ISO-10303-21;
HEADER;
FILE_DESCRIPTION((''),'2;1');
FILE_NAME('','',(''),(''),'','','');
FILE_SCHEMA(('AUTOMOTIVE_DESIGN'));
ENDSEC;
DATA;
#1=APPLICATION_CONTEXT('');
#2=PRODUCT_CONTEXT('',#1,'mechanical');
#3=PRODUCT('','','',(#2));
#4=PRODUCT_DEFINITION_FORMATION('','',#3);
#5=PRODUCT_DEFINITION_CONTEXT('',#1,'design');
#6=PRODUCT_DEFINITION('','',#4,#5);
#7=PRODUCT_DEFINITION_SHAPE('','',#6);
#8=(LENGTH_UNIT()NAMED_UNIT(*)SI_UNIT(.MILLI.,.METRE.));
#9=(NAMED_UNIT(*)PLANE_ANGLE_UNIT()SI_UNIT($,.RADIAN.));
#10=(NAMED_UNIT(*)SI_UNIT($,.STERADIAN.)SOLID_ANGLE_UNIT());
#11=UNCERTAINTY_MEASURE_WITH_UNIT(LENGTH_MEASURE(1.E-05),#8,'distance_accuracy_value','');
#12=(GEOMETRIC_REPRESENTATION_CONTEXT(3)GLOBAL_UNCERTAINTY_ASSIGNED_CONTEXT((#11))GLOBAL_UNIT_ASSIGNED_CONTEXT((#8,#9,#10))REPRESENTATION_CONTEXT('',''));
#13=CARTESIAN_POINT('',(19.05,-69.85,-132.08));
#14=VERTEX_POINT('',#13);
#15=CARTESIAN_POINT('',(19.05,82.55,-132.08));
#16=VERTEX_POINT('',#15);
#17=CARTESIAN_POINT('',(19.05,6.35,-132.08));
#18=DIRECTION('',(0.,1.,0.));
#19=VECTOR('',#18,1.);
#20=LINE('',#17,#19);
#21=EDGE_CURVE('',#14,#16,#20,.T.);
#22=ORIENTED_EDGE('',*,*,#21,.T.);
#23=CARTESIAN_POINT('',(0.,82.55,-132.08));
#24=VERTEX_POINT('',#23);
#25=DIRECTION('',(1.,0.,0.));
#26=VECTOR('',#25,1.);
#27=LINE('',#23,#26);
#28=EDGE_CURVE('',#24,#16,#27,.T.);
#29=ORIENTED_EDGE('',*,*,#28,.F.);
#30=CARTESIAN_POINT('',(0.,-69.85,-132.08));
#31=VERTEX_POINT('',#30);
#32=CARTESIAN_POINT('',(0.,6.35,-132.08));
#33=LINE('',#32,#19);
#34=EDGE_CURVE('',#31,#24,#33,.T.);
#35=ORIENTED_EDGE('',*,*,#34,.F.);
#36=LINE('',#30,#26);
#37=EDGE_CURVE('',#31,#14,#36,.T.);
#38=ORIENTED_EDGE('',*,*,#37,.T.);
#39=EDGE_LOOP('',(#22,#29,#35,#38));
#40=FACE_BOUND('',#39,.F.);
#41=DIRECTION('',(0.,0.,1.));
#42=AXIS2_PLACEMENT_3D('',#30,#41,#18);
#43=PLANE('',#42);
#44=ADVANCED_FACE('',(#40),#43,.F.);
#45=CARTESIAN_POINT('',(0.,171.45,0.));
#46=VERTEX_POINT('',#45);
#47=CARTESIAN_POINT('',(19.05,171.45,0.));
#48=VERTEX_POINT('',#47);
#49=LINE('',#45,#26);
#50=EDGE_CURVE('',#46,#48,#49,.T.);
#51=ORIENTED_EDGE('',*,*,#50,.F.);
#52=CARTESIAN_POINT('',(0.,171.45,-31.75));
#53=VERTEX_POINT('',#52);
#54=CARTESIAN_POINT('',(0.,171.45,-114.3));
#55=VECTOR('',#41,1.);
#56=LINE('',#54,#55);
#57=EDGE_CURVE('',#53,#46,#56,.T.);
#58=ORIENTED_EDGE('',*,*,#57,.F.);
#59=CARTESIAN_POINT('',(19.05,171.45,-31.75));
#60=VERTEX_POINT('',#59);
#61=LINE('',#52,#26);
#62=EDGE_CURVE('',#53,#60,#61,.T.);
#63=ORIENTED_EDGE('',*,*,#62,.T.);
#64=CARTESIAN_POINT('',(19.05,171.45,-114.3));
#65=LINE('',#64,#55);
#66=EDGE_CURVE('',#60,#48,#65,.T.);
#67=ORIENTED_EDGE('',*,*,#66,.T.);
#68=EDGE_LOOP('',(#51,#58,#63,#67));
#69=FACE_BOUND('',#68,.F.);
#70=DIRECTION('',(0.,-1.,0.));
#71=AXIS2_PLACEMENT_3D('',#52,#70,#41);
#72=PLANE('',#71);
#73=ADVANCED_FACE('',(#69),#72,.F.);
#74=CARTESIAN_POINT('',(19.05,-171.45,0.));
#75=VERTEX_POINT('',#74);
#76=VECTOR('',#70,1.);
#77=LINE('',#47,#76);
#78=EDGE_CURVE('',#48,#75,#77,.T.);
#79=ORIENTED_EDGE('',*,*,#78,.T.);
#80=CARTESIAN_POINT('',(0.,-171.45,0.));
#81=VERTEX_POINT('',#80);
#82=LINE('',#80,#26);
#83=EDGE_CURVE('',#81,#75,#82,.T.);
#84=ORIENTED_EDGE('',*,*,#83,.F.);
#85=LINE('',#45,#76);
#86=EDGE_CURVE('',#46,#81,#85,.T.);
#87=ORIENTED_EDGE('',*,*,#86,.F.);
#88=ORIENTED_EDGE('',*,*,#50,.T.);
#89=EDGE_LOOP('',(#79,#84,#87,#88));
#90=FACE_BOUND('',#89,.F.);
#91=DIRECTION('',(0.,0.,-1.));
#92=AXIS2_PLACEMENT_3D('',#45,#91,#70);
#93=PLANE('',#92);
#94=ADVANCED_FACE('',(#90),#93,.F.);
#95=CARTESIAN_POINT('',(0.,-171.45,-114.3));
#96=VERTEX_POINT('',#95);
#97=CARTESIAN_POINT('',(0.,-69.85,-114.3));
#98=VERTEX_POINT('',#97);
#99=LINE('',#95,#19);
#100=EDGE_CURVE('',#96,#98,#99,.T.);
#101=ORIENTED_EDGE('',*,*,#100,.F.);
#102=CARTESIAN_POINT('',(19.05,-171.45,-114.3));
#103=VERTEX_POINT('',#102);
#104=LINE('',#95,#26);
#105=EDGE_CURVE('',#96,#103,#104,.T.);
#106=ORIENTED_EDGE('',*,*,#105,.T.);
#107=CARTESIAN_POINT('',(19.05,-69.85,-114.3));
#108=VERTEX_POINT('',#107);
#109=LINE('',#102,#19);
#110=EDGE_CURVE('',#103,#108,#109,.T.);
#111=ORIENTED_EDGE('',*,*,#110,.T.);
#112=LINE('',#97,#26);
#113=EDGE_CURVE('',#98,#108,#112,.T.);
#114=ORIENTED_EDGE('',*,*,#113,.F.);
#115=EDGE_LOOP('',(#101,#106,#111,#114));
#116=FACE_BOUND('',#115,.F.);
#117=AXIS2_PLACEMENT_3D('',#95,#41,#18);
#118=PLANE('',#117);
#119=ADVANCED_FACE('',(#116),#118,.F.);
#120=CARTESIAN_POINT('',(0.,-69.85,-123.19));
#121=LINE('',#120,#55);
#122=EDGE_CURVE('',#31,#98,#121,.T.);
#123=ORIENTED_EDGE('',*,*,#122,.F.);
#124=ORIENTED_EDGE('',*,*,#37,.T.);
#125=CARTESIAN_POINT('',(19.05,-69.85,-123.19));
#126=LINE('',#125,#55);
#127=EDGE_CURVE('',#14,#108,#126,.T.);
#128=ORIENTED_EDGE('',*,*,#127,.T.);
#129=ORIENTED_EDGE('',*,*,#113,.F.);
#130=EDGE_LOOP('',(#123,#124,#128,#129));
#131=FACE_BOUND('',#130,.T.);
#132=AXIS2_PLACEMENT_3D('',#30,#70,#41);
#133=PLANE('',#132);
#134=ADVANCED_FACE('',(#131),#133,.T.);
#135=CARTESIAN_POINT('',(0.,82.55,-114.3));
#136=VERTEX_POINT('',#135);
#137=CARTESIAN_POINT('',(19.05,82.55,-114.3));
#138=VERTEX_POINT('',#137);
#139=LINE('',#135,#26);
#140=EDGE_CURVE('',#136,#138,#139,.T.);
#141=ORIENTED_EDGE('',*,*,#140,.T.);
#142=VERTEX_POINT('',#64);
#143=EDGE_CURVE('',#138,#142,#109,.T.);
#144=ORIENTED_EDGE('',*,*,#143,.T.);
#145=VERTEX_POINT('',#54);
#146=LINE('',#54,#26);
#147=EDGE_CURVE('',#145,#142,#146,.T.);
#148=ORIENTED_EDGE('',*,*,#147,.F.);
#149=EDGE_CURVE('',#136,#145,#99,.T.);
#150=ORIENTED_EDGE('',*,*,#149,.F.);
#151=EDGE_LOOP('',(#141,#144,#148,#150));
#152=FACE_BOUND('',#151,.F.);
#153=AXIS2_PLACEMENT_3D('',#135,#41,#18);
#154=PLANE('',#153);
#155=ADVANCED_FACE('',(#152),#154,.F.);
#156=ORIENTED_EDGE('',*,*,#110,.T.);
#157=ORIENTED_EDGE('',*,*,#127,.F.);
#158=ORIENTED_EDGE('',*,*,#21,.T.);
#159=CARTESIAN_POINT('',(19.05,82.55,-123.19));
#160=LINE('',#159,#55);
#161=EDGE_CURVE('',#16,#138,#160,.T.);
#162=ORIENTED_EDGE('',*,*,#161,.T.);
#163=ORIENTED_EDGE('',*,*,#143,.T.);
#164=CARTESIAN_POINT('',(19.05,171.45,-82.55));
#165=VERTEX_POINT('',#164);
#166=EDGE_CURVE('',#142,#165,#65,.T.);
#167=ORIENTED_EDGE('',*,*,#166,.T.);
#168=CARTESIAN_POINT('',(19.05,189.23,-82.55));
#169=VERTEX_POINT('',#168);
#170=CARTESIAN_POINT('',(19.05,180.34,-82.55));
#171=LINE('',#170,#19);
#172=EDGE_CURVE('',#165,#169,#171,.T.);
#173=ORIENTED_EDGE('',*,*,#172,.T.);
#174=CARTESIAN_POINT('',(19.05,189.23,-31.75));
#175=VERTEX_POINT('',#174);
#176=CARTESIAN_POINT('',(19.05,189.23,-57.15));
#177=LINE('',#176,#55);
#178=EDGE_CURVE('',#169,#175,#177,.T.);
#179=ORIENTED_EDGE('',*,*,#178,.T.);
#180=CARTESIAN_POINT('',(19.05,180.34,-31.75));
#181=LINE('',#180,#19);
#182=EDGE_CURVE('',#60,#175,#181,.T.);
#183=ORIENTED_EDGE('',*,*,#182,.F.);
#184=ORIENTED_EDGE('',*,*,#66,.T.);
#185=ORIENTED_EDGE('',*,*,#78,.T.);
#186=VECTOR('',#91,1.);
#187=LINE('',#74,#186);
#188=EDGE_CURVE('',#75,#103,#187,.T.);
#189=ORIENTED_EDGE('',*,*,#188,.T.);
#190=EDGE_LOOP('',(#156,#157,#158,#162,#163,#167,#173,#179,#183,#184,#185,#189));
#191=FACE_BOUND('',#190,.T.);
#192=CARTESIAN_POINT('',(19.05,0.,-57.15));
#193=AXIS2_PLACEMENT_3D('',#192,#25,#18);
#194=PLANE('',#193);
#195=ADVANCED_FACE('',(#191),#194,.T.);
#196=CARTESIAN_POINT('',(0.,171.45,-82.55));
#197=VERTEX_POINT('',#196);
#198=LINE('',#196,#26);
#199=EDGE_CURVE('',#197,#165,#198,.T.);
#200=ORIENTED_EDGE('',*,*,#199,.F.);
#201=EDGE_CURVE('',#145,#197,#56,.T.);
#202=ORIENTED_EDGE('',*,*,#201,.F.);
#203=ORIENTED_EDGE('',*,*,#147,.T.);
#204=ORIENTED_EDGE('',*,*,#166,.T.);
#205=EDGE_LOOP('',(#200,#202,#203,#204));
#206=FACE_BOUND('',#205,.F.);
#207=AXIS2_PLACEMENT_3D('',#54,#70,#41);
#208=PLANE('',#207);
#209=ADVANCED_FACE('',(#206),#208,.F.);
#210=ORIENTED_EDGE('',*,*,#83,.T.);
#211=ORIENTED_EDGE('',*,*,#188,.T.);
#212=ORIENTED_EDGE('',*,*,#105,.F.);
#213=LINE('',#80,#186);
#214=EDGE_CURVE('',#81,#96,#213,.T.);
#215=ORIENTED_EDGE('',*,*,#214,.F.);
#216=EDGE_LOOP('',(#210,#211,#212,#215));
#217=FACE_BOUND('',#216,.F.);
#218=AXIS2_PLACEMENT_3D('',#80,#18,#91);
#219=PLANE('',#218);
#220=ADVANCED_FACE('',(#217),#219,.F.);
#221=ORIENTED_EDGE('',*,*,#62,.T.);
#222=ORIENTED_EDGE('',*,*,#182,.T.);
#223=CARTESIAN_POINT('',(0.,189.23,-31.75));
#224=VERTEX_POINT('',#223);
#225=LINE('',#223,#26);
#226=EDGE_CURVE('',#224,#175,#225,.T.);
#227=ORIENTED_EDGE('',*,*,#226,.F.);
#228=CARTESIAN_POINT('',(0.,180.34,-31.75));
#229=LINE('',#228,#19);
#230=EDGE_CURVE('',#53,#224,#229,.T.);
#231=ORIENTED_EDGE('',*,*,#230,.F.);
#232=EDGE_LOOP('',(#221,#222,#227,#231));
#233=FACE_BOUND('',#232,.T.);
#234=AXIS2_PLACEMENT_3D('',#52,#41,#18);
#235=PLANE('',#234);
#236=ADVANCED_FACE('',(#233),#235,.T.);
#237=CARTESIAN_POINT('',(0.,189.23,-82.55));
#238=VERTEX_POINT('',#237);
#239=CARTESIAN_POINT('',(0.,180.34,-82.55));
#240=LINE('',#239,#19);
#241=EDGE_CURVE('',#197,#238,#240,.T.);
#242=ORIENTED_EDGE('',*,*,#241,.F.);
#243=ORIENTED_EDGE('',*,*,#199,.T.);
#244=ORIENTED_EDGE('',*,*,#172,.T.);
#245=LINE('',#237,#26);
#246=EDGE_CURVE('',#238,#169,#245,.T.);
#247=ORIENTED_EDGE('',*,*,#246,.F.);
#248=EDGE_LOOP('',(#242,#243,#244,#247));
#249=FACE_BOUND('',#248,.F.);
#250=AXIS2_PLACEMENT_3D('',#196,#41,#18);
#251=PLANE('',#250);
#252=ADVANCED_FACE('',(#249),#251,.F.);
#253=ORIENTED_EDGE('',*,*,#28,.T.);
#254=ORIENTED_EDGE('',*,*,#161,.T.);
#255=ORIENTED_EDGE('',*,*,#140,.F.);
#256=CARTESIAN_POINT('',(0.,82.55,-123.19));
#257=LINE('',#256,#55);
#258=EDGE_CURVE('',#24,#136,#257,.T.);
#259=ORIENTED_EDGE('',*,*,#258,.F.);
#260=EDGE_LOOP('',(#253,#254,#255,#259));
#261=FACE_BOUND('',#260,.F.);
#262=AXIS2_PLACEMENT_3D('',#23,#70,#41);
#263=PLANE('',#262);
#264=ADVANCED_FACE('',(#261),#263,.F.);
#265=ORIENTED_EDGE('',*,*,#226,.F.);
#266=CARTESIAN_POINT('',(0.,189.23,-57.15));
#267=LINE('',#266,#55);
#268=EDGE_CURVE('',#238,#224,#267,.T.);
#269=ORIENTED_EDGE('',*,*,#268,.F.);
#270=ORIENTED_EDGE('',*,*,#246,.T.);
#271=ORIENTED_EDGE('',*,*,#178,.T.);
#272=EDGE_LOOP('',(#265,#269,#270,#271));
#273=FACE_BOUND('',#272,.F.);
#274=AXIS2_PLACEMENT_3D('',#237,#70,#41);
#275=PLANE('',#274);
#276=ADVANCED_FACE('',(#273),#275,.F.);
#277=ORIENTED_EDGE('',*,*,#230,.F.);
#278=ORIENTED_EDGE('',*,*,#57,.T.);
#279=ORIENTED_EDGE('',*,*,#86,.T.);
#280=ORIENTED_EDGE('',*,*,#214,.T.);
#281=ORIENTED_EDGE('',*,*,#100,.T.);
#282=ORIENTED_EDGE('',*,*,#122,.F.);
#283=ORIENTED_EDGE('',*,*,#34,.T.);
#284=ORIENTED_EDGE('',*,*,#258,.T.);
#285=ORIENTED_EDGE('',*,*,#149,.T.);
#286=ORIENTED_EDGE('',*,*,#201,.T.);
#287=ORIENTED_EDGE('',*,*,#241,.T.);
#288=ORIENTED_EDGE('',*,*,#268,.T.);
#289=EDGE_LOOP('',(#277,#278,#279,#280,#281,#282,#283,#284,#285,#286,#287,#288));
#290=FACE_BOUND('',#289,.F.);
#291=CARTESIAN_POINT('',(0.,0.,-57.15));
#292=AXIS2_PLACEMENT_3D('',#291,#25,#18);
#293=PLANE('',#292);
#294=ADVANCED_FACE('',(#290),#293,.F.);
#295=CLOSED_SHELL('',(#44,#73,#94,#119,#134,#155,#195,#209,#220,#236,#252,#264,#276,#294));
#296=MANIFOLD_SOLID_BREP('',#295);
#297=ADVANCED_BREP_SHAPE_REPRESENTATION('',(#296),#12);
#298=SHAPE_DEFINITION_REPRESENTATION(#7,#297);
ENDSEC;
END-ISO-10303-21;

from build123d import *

# Parameters (mm, degrees)
F0_W     = 152.4
F0_H     = 17.78
F0_W_2   = 17.78
F0_H_2   = 50.8
F1_DEPTH = 19.05


# Not quite as in the source:
# - a feature names something its author has since deleted; it is built from what else it names


with BuildPart() as f1:
    # F0 (on Right) → F1 (new body)
    with BuildSketch(Plane.YZ):
        Polygon((171.45, 0), (-171.45, 0), (-171.45, -114.3), (-69.85, -114.3), (82.55, -114.3), (171.45, -114.3), (171.45, -82.55), (171.45, -31.75), align=None)
        with Locations((6.35, -123.19)):
            Rectangle(F0_W, F0_H)
        with Locations((180.34, -57.15)):
            Rectangle(F0_W_2, F0_H_2)
    extrude(amount=F1_DEPTH)


solid = f1.part
